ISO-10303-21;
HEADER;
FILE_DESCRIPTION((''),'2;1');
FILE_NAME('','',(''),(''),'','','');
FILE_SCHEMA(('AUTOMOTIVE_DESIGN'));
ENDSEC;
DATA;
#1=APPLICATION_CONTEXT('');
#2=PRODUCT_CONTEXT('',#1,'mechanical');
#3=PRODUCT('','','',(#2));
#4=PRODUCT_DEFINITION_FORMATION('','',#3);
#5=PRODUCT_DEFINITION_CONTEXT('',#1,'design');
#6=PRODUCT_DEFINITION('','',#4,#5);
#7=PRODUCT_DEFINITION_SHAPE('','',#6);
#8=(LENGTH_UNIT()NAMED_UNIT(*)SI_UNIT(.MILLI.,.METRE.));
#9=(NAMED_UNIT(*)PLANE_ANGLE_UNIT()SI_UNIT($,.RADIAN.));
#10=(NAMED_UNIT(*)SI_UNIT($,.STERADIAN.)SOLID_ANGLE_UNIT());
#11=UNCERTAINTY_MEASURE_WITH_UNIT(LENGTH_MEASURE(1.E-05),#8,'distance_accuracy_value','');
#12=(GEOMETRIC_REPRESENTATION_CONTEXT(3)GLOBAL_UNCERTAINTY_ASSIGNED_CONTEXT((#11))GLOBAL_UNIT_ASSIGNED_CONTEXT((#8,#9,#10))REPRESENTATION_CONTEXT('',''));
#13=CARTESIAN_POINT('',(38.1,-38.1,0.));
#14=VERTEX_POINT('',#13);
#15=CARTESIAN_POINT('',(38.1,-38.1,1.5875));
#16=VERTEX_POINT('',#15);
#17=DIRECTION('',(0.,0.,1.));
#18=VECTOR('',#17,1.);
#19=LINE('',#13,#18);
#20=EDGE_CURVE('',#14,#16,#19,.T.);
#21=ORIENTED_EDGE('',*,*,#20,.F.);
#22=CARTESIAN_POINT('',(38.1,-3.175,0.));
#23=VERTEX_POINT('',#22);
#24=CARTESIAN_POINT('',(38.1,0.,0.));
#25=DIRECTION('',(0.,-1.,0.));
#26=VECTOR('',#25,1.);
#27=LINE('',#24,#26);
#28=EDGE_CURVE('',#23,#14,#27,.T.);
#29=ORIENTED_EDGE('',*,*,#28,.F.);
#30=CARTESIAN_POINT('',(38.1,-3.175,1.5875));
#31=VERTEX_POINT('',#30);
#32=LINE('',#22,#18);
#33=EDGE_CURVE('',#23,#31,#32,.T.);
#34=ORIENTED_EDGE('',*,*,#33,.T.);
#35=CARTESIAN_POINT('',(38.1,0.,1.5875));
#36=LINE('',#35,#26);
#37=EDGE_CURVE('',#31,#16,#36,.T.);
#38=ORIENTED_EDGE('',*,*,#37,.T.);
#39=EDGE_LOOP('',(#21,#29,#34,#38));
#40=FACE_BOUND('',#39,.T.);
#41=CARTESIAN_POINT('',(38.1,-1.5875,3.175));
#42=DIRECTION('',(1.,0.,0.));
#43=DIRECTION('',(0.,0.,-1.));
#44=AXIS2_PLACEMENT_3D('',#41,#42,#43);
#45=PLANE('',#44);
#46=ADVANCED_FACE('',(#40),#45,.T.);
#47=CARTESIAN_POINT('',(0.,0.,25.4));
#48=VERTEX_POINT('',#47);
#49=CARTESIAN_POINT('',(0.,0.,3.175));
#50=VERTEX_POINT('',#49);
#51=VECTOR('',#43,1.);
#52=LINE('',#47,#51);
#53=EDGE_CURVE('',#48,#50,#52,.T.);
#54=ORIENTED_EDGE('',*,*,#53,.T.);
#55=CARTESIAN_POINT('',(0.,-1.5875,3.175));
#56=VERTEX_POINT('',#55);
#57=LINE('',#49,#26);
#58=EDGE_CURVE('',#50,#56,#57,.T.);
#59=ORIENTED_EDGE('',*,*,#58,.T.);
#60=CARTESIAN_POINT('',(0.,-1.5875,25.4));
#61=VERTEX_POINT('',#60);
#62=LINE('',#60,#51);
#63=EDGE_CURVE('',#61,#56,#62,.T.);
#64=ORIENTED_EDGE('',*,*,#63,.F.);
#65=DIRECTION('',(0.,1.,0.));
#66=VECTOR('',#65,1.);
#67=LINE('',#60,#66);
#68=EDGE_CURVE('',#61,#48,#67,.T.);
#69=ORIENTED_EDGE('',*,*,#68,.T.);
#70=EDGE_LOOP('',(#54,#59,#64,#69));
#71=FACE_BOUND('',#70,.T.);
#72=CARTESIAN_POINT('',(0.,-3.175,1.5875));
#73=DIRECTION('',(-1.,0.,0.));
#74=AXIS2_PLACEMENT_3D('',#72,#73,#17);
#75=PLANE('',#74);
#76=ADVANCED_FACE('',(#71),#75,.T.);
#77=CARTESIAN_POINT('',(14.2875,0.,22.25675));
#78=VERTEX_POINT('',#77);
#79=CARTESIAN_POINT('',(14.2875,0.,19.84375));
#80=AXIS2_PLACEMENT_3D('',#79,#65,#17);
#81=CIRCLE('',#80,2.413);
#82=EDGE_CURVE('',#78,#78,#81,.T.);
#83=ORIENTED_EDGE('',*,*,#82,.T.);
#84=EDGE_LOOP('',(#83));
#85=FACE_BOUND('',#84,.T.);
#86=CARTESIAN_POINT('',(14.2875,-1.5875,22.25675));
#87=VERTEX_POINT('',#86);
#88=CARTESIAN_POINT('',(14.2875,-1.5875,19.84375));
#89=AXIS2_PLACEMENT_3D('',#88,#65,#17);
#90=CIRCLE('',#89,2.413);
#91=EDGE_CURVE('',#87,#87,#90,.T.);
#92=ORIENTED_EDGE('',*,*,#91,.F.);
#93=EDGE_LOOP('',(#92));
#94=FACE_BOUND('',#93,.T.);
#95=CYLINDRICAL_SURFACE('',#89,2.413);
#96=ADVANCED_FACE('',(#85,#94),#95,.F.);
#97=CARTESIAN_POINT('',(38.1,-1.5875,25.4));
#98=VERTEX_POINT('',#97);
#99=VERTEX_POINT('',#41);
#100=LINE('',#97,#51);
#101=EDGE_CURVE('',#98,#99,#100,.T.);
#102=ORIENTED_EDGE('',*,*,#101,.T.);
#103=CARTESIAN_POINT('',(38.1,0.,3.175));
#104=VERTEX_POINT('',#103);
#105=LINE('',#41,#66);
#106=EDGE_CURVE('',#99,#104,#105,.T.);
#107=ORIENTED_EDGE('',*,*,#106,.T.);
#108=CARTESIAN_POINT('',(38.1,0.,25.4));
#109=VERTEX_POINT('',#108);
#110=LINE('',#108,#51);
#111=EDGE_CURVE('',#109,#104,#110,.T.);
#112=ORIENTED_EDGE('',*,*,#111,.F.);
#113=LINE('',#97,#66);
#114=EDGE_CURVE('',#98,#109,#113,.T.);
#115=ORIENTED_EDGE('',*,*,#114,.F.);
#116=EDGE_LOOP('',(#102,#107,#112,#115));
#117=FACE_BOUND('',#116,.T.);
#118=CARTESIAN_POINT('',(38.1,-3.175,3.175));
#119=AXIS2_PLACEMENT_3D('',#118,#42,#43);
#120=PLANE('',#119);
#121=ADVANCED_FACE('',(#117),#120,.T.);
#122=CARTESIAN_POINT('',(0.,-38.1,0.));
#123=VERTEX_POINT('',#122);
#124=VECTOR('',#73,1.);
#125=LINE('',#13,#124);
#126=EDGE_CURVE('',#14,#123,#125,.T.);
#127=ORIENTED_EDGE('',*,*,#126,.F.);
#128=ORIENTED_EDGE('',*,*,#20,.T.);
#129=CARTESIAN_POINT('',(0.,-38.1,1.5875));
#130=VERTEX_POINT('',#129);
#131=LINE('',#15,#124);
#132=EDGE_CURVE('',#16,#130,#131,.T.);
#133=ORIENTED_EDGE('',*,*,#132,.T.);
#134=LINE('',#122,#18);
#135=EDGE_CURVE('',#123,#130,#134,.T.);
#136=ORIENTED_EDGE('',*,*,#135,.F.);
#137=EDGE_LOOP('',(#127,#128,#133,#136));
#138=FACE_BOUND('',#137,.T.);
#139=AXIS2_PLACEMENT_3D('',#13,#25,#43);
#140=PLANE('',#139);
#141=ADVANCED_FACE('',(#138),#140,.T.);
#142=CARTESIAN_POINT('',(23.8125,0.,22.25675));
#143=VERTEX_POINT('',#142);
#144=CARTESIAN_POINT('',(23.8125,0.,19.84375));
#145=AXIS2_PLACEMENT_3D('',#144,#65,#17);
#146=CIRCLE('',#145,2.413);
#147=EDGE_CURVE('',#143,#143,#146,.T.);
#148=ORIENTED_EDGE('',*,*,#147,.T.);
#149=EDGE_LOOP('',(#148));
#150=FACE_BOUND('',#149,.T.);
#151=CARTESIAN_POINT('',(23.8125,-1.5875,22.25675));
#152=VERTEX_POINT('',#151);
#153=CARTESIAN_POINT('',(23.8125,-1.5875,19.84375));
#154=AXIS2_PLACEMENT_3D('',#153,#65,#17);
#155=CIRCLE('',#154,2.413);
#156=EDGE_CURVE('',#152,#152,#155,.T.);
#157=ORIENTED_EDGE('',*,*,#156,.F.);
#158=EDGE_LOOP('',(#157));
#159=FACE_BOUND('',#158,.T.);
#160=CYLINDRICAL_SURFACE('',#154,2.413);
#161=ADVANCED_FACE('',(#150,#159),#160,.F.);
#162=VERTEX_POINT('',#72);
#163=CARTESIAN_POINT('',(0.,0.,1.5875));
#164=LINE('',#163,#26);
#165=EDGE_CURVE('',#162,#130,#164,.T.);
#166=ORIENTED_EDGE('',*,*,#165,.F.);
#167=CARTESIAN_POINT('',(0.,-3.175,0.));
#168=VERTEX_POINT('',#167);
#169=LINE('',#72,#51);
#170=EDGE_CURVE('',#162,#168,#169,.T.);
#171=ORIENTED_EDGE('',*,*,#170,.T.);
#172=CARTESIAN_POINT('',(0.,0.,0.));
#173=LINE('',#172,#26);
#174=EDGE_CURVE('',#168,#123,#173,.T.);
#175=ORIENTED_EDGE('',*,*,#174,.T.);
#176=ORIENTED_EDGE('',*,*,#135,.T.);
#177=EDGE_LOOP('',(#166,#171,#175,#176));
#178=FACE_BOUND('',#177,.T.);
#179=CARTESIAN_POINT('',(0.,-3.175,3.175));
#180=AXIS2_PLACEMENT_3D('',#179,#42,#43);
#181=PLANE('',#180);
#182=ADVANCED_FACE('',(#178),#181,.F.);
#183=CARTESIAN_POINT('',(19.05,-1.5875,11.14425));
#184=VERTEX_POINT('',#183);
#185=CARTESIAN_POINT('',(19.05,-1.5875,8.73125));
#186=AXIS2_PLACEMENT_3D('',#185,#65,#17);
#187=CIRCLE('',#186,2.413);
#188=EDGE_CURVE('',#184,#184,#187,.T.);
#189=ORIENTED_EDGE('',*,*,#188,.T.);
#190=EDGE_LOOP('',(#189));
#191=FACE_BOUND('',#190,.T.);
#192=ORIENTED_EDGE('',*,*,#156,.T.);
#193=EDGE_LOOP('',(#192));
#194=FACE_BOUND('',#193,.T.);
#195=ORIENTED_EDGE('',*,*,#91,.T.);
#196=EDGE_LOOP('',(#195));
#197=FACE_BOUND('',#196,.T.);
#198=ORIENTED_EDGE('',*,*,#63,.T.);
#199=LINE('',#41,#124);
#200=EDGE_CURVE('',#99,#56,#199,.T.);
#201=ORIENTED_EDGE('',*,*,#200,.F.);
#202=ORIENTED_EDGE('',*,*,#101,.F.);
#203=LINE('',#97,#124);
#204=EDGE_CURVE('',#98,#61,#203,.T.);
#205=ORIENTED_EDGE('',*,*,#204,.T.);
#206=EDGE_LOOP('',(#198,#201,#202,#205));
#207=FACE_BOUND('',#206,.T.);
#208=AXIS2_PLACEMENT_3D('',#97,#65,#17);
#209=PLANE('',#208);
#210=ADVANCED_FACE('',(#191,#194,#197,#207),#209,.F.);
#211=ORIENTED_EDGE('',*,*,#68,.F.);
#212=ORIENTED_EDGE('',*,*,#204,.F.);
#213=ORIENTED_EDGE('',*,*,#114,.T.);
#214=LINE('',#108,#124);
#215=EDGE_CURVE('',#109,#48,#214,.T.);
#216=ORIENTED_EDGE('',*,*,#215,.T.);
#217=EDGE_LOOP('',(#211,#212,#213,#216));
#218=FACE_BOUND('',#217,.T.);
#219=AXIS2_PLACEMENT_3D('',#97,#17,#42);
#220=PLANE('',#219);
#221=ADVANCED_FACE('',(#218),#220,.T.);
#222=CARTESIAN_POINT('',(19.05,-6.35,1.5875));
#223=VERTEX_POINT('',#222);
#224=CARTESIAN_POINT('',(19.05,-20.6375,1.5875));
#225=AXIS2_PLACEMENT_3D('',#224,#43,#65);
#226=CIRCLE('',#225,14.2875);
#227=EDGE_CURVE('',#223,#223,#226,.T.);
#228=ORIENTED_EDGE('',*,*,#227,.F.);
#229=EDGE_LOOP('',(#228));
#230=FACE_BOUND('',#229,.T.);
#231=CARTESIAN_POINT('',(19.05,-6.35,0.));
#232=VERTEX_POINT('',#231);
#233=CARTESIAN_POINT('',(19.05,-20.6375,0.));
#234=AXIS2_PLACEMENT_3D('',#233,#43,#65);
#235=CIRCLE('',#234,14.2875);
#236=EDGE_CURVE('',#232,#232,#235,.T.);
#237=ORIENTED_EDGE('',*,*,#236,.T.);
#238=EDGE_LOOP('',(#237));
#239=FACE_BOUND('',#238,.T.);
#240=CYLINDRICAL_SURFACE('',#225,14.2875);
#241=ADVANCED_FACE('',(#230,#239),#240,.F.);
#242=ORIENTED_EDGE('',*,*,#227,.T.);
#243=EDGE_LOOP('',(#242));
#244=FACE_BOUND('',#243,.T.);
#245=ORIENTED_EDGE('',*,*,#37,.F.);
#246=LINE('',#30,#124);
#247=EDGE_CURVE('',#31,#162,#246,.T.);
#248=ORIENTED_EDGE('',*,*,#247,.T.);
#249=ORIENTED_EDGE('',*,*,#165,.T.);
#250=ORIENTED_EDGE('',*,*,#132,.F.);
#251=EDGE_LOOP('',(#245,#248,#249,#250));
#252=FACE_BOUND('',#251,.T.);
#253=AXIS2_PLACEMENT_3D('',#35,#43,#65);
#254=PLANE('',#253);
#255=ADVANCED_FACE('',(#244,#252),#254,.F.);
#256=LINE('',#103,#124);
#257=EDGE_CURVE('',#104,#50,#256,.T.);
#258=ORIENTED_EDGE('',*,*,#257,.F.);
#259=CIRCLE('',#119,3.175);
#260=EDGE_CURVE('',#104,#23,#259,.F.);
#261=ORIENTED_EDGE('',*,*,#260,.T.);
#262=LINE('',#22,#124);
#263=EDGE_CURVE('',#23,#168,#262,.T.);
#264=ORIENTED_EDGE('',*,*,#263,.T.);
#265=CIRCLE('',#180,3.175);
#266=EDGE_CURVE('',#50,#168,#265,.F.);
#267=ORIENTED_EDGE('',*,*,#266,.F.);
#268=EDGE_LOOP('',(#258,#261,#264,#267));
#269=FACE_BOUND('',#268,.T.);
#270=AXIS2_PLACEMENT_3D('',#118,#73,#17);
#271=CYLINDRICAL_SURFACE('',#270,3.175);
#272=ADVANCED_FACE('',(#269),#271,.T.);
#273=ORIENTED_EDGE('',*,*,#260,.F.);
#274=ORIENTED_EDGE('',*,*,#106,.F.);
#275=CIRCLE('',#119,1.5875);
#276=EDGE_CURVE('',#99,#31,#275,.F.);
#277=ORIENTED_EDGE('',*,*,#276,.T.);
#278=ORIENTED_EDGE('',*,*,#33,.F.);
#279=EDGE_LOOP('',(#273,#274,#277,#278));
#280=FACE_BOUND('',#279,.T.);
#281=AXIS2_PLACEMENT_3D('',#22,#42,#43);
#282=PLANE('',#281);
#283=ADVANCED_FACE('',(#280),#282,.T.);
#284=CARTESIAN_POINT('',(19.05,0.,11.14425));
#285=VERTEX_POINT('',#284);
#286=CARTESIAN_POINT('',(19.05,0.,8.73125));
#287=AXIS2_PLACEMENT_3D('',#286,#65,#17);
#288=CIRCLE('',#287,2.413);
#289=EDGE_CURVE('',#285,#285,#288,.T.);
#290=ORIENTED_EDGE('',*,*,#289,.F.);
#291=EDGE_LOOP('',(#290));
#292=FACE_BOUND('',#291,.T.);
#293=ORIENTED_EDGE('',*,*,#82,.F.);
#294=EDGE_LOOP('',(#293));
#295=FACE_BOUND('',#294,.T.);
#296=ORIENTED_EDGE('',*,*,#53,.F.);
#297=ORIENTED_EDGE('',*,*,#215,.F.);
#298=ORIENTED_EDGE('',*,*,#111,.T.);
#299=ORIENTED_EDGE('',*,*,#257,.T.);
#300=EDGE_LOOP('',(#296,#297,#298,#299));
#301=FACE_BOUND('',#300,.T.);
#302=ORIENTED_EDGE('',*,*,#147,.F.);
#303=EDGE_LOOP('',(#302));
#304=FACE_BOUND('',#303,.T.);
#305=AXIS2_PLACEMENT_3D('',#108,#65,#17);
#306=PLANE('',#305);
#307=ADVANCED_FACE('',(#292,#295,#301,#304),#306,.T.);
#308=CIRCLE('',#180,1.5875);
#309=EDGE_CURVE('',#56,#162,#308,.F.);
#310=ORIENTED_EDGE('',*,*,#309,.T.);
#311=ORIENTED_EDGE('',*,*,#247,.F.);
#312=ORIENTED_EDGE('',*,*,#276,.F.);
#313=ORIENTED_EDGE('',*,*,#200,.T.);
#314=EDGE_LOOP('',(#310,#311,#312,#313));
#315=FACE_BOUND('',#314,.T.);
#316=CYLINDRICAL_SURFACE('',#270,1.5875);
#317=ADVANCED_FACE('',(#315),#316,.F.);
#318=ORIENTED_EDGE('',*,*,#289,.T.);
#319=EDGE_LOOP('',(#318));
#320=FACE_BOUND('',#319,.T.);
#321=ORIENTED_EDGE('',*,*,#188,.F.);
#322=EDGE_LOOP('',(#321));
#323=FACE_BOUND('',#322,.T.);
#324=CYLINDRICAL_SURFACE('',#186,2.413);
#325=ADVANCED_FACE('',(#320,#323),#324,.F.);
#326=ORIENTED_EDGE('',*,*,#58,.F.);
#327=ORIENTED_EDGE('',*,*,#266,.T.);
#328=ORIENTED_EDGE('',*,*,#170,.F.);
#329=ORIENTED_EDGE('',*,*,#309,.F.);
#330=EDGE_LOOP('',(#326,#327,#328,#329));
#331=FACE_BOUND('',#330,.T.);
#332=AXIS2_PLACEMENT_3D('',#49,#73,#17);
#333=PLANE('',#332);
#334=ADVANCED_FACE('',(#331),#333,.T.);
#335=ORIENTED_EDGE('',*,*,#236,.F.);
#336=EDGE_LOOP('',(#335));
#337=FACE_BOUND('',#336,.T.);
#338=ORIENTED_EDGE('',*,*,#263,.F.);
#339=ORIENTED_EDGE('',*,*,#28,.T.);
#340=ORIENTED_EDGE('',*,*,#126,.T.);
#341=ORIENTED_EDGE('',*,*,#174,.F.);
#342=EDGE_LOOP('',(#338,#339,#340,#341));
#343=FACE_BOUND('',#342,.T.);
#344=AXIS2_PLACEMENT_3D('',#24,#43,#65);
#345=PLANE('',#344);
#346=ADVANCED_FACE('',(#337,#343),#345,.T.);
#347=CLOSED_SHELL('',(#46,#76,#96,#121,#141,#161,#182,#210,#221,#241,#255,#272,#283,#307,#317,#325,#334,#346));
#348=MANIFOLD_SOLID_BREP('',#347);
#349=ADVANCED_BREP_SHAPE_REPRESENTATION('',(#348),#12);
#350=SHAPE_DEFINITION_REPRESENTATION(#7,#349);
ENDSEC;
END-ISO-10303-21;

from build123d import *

# Parameters (mm, degrees)
BASE_FLANGE1_DEPTH = 38.1
SKETCH6_R          = 2.413
CUT_EXTRUDE2_DEPTH = 2.54
SKETCH8_R          = 14.2875
CUT_EXTRUDE3_DEPTH = 2.54


# Sheet-metal steps are written as plain solids
with BuildPart() as part:
    # Sketch1 → Base-Flange1 (new body)
    with BuildSketch(Plane(origin=(0, 0, 0), x_dir=(0, 0, -1), z_dir=(1, 0, 0))):
        with BuildLine():
            Line((-25.4, 0), (-3.175, 0))
            ThreePointArc((-3.175, 0), (-0.92993597, -0.92993597), (0, -3.175))
            Line((0, -3.175), (0, -38.1))
            Line((0, -38.1), (-1.5875, -38.1))
            Line((-1.5875, -38.1), (-1.5875, -3.175))
            ThreePointArc((-1.5875, -3.175), (-2.052467985, -2.052467985), (-3.175, -1.5875))
            Line((-3.175, -1.5875), (-25.4, -1.5875))
            Line((-25.4, -1.5875), (-25.4, 0))
        make_face()
    extrude(amount=BASE_FLANGE1_DEPTH)

    # Sketch6 → Cut-Extrude2 (cut)
    with BuildSketch(Plane(origin=(0, 0, 0), x_dir=(1, 0, 0), z_dir=(0, 1, 0))):
        with Locations(Location((23.8125, -19.84375, 0), (0, 0, 270))):
            Circle(SKETCH6_R)
        with Locations(Location((19.05, -8.73125, 0), (0, 0, 270))):
            Circle(SKETCH6_R)
        with Locations(Location((14.2875, -19.84375, 0), (0, 0, 270))):
            Circle(SKETCH6_R)
    extrude(amount=-CUT_EXTRUDE2_DEPTH, mode=Mode.SUBTRACT)

    # Sketch8 → Cut-Extrude3 (cut)
    with BuildSketch(Plane(origin=(0, 0, 0), x_dir=(-1, 0, 0), z_dir=(0, 0, -1))):
        with Locations(Location((-19.05, -20.6375, 0), (0, 0, 90))):
            Circle(SKETCH8_R)
    extrude(amount=-CUT_EXTRUDE3_DEPTH, mode=Mode.SUBTRACT)


solid = part.part
